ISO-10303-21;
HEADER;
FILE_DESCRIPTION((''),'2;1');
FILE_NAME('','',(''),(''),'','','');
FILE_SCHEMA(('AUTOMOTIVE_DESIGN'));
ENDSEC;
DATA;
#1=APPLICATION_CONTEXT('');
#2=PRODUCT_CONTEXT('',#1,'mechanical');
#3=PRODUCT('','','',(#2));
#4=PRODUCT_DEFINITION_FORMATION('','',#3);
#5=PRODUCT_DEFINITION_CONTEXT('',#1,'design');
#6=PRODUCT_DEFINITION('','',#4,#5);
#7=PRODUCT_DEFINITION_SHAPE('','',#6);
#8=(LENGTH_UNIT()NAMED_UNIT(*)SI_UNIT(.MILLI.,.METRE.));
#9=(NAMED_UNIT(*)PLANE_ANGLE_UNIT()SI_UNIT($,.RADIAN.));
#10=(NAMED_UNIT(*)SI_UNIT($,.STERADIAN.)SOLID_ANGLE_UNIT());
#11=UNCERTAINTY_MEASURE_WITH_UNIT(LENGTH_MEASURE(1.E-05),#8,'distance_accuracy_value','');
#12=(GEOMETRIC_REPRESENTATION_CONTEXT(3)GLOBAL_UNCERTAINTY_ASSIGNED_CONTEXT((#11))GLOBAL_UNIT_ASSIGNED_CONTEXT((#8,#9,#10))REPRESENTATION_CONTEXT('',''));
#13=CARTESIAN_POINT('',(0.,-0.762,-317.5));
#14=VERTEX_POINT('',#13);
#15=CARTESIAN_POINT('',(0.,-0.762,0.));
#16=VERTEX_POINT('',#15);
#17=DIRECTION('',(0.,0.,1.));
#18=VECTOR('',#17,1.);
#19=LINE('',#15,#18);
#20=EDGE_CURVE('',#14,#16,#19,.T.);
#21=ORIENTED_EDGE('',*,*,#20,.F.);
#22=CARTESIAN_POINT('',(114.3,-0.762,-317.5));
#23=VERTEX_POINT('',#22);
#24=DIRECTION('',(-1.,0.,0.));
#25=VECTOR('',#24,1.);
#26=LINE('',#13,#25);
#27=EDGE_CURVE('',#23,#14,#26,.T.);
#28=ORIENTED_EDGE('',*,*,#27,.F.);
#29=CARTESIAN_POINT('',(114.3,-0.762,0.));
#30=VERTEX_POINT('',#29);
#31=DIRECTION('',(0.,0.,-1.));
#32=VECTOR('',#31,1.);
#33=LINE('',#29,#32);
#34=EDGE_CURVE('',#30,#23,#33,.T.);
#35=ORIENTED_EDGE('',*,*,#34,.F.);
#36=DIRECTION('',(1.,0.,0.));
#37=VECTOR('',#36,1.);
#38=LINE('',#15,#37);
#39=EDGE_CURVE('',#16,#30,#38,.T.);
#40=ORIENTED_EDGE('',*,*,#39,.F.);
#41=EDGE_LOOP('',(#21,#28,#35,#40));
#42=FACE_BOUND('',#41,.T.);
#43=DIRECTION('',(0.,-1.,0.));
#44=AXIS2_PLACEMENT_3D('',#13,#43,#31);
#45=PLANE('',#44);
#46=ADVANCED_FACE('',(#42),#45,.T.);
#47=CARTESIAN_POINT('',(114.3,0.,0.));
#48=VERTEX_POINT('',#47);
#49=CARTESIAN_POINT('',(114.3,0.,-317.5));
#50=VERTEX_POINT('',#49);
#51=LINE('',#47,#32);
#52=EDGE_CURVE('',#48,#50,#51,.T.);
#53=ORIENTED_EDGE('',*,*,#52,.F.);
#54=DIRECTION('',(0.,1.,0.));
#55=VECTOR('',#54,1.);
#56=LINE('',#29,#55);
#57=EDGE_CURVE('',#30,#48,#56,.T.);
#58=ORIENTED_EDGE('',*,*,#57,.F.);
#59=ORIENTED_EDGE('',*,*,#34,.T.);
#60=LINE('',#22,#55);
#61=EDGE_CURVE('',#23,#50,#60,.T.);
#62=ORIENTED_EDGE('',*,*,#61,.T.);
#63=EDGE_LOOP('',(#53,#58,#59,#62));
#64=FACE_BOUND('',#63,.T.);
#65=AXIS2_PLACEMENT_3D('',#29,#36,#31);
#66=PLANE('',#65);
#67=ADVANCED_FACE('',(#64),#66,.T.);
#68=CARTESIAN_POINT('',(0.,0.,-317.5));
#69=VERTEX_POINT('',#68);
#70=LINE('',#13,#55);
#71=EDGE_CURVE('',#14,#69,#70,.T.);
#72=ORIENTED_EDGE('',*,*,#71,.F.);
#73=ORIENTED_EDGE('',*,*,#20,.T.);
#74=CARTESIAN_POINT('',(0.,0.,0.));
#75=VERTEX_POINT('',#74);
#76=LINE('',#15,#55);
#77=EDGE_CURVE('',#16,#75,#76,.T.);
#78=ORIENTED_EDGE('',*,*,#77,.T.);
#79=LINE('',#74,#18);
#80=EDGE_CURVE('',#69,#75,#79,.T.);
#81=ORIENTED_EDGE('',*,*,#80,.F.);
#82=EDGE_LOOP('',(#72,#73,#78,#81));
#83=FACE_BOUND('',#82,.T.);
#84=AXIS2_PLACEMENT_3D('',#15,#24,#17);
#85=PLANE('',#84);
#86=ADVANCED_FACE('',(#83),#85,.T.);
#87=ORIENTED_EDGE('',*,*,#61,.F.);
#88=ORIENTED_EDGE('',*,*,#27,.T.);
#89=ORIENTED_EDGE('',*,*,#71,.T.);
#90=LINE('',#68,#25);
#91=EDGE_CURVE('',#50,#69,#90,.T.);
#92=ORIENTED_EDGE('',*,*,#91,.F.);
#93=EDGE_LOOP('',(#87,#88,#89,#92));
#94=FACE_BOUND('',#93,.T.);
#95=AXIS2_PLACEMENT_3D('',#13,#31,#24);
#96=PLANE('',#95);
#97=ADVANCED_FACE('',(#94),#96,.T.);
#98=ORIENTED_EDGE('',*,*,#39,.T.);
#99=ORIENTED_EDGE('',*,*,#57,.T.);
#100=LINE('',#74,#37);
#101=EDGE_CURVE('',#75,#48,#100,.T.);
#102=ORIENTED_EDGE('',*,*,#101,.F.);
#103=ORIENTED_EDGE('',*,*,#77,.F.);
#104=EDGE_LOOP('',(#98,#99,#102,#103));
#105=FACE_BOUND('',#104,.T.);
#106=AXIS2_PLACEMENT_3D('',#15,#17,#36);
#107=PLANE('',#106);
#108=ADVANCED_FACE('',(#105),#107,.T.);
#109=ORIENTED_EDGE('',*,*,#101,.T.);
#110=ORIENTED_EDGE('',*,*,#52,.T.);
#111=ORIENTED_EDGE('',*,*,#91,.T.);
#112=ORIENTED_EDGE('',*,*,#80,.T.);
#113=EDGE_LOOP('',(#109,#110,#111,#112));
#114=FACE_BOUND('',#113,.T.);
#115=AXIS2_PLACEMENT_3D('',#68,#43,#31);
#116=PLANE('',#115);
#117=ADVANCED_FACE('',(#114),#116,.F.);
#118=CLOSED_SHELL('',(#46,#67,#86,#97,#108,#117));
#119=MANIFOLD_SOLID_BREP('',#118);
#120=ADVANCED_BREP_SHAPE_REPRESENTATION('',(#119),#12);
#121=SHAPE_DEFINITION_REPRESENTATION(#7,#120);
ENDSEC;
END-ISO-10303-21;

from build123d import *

# Parameters (mm, degrees)
SKETCH1_W          = 114.3
SKETCH1_H          = 317.5
BASE_FLANGE1_DEPTH = 0.762


# Sheet-metal steps are written as plain solids
with BuildPart() as part:
    # Sketch1 → Base-Flange1 (new body)
    with BuildSketch(Plane(origin=(0, 0, 0), x_dir=(1, 0, 0), z_dir=(0, 1, 0))):
        with Locations((57.15, 158.75)):
            Rectangle(SKETCH1_W, SKETCH1_H)
    extrude(amount=-BASE_FLANGE1_DEPTH)


solid = part.part
